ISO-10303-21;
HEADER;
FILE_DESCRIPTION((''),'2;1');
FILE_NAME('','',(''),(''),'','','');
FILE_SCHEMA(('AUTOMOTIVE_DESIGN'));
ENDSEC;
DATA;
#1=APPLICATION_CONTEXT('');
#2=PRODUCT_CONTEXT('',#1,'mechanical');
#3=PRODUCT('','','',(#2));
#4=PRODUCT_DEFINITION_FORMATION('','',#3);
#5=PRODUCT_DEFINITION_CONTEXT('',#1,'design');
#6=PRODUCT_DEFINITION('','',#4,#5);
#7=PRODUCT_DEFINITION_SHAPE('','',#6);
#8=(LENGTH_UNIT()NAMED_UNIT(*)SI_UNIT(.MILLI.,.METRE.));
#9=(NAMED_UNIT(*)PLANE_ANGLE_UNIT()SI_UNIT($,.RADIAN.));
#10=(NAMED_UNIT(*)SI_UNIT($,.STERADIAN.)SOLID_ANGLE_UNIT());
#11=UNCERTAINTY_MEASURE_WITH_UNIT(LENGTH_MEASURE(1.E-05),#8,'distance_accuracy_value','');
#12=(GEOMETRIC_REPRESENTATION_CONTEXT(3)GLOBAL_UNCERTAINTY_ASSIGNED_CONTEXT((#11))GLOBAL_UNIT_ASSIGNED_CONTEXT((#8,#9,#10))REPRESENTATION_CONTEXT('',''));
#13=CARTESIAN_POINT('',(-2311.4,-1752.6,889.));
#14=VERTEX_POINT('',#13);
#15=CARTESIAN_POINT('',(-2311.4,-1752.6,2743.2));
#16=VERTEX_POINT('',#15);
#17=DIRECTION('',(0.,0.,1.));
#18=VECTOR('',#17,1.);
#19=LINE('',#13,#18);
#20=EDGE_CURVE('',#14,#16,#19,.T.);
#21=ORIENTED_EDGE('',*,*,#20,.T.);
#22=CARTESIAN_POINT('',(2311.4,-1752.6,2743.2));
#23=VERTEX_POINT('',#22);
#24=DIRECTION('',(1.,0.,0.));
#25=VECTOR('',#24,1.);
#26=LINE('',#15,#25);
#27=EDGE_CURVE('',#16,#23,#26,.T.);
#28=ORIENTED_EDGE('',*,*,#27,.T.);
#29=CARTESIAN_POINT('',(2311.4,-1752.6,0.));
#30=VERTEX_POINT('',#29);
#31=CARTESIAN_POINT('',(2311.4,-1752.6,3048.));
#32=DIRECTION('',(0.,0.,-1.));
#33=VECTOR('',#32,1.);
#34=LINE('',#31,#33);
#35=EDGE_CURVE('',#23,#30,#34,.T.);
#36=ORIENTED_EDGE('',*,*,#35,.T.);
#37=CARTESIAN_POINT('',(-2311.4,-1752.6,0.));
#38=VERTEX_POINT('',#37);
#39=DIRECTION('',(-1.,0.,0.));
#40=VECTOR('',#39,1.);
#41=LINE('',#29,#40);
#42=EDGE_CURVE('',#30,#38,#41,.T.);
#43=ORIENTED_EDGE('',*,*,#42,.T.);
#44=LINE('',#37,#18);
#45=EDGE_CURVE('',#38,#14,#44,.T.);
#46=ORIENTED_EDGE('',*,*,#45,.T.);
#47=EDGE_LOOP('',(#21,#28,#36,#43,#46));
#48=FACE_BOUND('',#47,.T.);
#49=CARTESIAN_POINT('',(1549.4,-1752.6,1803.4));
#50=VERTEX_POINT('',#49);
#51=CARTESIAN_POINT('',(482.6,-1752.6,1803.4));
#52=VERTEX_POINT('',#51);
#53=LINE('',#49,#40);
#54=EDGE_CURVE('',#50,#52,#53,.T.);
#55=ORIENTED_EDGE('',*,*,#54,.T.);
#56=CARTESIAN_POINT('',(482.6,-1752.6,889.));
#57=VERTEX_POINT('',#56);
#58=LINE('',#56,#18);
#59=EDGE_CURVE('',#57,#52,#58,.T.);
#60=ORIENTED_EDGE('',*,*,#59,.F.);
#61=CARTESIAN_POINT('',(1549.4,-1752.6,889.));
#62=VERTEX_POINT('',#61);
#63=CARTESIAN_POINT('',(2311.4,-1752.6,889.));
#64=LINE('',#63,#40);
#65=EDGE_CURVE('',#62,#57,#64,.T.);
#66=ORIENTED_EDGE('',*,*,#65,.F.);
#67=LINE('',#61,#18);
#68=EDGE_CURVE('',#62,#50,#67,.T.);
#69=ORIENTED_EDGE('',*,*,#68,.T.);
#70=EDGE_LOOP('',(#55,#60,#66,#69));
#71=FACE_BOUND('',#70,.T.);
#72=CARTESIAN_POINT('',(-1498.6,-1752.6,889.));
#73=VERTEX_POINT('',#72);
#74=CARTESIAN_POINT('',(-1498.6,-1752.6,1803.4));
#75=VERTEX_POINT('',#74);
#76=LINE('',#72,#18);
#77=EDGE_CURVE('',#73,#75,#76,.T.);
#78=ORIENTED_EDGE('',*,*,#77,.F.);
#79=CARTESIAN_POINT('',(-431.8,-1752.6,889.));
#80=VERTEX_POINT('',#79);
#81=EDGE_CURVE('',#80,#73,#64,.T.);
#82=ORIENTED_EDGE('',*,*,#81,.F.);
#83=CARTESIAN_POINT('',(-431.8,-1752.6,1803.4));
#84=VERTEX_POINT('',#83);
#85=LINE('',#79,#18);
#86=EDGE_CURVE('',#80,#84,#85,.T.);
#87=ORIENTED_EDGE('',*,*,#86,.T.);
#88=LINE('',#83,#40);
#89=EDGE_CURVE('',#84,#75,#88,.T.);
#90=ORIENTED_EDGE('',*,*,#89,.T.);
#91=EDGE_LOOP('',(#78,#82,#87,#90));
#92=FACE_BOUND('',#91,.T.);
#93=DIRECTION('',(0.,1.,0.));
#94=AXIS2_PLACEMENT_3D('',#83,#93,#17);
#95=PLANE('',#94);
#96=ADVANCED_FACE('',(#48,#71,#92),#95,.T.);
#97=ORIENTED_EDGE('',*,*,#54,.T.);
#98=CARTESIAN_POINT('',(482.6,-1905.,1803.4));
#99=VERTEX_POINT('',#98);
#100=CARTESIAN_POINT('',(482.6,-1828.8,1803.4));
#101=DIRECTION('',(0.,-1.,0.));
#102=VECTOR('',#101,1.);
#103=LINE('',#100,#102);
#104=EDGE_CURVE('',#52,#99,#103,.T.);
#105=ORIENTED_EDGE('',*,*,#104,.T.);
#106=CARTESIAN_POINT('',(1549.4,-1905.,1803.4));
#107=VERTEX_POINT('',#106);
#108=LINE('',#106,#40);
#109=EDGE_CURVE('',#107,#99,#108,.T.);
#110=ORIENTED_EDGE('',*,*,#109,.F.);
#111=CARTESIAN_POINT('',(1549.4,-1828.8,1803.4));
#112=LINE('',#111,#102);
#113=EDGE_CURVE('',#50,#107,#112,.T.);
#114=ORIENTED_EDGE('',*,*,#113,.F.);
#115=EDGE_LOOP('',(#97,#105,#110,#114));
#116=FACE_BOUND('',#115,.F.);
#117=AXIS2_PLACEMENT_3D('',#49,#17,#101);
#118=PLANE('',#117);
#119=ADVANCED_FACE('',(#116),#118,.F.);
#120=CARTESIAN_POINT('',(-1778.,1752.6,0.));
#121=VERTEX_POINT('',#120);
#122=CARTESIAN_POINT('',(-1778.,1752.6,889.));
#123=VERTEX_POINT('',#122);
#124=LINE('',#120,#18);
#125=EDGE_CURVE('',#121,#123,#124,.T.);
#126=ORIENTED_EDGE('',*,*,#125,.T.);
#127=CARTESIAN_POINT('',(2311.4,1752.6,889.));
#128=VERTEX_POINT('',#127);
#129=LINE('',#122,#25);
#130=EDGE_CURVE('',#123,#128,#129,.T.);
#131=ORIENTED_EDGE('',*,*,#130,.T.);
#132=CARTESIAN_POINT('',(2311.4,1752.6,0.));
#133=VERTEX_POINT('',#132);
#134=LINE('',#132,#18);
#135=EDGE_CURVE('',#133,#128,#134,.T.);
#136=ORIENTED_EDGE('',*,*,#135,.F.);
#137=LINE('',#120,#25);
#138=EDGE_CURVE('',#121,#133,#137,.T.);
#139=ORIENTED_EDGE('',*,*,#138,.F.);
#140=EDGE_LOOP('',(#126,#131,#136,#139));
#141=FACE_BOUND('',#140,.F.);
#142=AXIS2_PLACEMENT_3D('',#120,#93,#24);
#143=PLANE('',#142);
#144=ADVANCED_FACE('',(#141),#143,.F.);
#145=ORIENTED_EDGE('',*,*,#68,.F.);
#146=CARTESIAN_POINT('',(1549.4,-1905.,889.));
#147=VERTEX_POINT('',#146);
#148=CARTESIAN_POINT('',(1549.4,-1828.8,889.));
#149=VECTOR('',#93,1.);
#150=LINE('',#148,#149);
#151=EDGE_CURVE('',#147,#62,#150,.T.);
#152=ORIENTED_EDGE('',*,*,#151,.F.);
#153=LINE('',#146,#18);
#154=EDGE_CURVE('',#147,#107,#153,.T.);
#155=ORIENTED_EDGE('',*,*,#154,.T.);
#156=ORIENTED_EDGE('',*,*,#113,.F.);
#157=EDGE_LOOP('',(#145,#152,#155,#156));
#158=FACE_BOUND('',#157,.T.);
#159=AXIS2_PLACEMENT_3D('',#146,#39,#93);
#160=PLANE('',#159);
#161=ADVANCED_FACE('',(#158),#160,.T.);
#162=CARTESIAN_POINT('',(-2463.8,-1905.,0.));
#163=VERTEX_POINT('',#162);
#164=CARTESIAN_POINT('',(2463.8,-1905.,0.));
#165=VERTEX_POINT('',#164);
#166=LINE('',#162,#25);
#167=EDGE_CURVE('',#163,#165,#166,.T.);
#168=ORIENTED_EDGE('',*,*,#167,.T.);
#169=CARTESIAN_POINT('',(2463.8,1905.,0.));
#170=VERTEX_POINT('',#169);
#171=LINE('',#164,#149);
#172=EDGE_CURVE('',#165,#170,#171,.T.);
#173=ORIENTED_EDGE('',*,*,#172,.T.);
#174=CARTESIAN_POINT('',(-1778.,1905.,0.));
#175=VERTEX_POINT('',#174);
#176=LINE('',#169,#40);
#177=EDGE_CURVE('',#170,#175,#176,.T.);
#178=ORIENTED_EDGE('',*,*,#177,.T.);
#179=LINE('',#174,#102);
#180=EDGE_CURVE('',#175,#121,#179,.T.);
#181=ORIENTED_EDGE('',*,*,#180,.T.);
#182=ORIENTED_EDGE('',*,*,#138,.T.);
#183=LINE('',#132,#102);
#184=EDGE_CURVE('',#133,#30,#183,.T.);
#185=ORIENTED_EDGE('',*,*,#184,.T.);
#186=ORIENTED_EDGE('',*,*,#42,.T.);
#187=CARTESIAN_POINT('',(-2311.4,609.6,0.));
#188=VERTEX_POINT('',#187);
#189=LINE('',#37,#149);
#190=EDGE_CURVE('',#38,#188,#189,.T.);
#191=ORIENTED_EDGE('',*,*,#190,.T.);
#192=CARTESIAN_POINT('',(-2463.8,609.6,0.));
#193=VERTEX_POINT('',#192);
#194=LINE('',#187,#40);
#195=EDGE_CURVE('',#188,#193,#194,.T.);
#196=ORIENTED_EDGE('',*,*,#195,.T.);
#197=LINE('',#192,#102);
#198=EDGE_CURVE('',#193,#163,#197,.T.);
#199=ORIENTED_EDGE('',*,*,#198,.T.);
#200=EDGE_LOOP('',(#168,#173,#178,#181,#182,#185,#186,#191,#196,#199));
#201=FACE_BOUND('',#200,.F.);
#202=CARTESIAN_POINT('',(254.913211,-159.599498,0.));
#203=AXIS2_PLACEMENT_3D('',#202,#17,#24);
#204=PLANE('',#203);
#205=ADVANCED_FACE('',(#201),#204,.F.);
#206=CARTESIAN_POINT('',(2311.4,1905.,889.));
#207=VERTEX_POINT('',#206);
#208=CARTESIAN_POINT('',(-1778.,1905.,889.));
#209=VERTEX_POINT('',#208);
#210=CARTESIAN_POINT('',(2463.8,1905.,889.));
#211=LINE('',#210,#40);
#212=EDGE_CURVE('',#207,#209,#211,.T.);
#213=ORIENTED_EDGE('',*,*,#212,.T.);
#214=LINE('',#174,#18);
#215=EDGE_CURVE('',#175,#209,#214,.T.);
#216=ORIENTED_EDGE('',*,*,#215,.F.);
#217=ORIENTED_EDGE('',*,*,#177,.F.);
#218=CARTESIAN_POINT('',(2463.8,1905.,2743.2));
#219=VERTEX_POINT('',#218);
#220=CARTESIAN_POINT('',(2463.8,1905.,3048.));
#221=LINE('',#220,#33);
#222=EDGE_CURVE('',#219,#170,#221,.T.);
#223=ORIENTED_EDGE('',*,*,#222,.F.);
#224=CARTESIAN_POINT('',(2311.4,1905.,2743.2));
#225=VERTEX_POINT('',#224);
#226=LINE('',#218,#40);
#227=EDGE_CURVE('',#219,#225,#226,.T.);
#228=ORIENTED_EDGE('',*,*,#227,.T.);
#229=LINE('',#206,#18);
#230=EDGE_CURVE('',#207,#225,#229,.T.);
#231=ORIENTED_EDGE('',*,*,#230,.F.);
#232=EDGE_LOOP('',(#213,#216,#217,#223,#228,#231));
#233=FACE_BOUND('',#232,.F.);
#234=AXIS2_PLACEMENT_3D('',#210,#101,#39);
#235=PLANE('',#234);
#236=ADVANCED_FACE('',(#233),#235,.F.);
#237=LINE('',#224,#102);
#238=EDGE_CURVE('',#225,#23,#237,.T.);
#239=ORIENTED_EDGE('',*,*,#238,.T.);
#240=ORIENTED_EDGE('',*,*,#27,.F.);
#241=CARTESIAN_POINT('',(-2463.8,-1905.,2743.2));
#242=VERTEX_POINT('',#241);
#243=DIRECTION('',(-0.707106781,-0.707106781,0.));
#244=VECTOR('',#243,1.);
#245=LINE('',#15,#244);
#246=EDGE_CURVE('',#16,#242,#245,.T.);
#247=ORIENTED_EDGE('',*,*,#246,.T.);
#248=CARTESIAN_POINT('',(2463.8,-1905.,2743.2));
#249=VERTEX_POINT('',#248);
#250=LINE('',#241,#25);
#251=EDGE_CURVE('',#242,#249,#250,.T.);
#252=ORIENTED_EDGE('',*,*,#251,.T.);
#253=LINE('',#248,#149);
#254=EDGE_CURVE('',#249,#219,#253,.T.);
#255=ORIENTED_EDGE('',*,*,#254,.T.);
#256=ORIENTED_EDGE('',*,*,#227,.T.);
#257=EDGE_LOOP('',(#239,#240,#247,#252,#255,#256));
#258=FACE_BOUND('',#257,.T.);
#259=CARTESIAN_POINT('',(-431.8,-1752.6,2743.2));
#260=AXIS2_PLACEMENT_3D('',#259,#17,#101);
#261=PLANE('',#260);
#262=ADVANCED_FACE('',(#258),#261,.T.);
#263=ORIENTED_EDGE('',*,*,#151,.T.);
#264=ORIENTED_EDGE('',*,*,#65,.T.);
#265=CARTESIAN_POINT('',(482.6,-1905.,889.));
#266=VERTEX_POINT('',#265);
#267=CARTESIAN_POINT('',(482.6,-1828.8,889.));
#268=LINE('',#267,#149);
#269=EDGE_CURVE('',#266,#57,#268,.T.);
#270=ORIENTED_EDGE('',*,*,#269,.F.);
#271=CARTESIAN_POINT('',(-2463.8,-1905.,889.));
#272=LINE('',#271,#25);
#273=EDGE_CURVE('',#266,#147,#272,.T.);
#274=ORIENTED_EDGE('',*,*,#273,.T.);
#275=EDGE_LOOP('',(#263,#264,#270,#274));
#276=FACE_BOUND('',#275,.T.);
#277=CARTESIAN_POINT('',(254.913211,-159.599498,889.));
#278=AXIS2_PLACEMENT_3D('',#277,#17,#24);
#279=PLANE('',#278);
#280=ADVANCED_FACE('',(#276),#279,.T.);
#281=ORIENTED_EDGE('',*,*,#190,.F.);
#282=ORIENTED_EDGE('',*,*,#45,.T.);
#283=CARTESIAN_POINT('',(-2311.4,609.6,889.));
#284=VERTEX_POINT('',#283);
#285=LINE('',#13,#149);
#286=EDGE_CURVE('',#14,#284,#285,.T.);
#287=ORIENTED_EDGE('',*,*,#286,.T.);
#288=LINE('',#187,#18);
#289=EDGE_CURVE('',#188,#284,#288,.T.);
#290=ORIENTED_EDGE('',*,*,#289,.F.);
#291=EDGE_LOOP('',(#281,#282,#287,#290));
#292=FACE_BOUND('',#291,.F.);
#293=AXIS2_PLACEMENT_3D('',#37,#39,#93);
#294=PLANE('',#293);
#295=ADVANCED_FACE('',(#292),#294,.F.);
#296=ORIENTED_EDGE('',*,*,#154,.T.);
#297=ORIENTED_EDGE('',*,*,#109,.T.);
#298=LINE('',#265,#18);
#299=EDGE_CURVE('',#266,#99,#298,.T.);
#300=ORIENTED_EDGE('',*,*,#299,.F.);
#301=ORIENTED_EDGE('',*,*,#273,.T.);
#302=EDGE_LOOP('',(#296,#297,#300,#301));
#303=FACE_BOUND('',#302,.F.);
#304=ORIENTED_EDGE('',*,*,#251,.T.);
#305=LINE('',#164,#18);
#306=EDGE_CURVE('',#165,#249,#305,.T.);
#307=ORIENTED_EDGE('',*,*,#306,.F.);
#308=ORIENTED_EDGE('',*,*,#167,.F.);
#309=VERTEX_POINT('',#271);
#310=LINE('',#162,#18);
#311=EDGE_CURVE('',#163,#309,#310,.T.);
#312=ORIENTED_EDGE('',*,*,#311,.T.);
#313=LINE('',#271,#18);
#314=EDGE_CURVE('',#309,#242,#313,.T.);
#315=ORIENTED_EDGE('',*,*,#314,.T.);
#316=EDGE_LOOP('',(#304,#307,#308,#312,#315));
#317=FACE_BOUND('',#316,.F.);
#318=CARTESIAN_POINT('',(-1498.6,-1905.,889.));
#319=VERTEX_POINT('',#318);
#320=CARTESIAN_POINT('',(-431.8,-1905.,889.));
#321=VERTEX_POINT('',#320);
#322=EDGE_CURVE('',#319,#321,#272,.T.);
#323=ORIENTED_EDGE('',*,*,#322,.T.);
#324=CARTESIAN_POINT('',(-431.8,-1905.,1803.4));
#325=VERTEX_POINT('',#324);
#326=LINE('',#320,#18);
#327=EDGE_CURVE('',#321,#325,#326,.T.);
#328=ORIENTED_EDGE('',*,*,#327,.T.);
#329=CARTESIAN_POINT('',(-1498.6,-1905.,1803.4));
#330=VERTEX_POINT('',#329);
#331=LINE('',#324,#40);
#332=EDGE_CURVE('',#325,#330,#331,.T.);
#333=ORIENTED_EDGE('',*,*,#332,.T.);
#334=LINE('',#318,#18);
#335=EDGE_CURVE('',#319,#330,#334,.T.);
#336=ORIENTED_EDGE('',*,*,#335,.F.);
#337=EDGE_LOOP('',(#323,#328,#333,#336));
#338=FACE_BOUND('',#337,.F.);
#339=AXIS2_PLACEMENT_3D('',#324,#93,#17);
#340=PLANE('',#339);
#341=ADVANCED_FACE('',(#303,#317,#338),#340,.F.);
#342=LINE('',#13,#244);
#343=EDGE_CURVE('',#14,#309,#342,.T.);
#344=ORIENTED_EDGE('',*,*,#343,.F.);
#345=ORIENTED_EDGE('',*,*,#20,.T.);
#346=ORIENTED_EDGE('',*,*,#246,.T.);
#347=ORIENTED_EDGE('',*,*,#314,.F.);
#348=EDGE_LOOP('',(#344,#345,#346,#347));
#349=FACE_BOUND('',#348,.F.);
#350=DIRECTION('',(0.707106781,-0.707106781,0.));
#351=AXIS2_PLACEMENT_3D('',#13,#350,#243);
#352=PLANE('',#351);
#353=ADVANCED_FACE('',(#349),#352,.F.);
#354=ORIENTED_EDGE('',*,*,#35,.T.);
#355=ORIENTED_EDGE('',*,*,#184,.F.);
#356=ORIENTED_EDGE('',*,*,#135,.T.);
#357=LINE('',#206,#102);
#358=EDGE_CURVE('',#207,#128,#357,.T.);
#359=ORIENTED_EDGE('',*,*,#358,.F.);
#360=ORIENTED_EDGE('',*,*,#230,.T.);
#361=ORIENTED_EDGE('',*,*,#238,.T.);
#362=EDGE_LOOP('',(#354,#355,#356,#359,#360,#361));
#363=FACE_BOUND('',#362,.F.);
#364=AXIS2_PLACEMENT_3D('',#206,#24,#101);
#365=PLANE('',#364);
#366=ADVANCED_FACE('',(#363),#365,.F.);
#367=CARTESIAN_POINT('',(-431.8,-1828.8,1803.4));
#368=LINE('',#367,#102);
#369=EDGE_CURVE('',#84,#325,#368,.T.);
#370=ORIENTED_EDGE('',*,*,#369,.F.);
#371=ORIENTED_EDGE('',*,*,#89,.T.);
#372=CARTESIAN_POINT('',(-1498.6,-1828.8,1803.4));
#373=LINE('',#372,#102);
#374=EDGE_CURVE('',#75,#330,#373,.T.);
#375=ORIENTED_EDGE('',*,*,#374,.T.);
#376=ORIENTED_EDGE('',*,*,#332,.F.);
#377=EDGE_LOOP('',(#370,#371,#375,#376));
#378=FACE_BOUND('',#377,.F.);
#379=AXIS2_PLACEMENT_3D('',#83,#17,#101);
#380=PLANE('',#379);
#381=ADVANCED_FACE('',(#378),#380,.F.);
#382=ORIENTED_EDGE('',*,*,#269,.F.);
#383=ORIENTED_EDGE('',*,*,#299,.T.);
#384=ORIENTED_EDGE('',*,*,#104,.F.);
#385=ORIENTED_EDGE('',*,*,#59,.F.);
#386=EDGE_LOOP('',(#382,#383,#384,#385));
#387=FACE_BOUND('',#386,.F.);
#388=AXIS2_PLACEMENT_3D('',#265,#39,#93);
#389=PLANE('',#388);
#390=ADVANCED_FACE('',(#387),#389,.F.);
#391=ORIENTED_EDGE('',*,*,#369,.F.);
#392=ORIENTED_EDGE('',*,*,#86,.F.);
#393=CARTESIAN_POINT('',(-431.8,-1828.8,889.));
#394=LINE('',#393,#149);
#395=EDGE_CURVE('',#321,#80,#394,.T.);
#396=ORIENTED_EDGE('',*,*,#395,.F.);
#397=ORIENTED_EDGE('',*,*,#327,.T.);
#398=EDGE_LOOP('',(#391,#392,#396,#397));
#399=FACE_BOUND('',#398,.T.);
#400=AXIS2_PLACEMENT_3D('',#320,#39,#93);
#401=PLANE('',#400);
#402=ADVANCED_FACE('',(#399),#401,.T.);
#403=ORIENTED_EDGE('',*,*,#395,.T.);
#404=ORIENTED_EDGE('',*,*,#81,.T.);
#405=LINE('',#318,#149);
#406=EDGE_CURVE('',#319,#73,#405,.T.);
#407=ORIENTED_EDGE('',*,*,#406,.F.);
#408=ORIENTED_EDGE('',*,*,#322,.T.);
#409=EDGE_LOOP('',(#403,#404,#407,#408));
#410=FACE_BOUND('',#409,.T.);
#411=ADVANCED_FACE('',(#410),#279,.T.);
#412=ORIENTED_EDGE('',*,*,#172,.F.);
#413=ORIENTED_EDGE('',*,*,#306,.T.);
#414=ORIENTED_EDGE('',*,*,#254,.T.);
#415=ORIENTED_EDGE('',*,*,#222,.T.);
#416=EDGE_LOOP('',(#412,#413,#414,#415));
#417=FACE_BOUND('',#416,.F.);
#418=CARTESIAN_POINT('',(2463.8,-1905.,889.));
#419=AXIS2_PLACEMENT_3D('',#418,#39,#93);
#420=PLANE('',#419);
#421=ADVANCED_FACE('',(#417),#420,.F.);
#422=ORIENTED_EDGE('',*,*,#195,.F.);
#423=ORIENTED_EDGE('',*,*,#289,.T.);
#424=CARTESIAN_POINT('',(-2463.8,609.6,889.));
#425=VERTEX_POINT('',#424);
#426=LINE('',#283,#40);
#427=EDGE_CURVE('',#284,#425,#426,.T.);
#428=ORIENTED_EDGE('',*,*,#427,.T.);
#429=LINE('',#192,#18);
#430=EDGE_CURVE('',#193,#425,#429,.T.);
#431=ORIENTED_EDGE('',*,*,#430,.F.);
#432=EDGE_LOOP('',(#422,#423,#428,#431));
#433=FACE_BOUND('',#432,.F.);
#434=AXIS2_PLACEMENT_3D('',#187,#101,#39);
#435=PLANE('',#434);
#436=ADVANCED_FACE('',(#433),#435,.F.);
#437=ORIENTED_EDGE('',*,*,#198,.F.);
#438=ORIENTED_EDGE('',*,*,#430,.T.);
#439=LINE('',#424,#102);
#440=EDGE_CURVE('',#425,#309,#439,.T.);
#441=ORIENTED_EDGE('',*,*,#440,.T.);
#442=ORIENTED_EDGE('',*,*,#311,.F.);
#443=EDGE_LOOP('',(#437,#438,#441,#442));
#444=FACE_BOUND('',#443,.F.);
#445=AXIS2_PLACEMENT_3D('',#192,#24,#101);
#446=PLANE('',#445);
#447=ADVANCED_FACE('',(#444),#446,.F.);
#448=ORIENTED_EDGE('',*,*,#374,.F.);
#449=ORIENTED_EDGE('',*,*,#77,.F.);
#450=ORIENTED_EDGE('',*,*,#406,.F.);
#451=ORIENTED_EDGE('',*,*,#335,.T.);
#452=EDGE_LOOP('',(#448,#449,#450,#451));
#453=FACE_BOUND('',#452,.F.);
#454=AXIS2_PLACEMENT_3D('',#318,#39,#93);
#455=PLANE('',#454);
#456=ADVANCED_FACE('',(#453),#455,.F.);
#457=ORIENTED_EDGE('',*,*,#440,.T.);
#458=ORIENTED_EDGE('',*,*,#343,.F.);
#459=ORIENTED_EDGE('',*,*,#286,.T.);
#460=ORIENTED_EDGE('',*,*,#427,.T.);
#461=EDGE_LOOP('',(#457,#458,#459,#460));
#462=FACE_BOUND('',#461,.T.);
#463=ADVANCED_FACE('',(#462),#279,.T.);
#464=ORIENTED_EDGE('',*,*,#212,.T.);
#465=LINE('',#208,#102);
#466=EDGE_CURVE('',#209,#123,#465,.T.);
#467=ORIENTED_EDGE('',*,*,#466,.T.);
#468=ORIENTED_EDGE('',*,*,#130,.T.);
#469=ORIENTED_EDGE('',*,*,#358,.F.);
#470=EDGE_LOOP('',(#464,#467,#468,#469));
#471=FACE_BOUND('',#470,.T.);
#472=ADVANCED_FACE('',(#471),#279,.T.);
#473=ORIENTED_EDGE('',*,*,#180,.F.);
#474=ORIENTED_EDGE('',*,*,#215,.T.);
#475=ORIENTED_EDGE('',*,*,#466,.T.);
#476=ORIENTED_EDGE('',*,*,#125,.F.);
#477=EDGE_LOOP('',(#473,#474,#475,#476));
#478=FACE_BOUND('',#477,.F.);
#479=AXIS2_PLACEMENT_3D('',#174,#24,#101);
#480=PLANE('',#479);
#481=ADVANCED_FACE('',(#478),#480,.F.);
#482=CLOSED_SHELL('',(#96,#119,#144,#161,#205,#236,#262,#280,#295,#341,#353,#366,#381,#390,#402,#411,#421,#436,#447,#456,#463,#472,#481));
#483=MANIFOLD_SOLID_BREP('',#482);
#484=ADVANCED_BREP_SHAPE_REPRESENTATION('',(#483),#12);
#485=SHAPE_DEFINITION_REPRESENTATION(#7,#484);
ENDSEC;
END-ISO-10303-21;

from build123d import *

# Parameters (mm, degrees)
F1_DEPTH  = 889
F3_DEPTH  = 2159
F4_W      = 762
F4_H      = 152.4
F4_W_2    = 914.4
F5_DEPTH  = 2159
F6_W      = 152.4
F6_H      = 1244.6
F7_DEPTH  = 1066.8
F8_W      = 152.4
F8_H      = 1244.6
F9_DEPTH  = 1066.8
F10_DEPTH = 304.8


with BuildPart() as f1:
    # F0 (on Top) → F1 (new body)
    with BuildSketch(Plane.XY):
        Polygon((-1778, 1752.6), (2311.4, 1752.6), (2311.4, -1752.6), (-2311.4, -1752.6), (-2311.4, 609.6), (-2463.8, 609.6), (-2463.8, -1752.6), (-2463.8, -1905), (-2311.4, -1905), (2311.4, -1905), (2463.8, -1905), (2463.8, 1752.6), (2463.8, 1905), (2311.4, 1905), (-1778, 1905), align=None)
    extrude(amount=F1_DEPTH)

    # F2 (on face) → F3 (join)
    with BuildSketch(Plane.XY.offset(889)):
        Polygon((2311.4, 1905), (2311.4, 1752.6), (2311.4, -1752.6), (2311.4, -1905), (2463.8, -1905), (2463.8, 1905), align=None)
    extrude(amount=F3_DEPTH)

    # F4 (on face) → F5 (join)
    with BuildSketch(Plane.XY.offset(889)):
        with Locations((1930.4, -1828.8)):
            Rectangle(F4_W, F4_H)
        with Locations((25.4, -1828.8)):
            Rectangle(F4_W_2, F4_H)
        Polygon((-2463.8, -1905), (-1498.6, -1905), (-1498.6, -1752.6), (-2311.4, -1752.6), align=None)
    extrude(amount=F5_DEPTH)

    # F6 (on face) → F7 (join, through all)
    with BuildSketch(Plane(origin=(1549.4, 0, 0), x_dir=(0, -1, 0), z_dir=(-1, 0, 0))):
        with Locations((1828.8, 2425.7)):
            Rectangle(F6_W, F6_H)
    extrude(amount=F7_DEPTH)

    # F8 (on face) → F9 (join, through all)
    with BuildSketch(Plane(origin=(-431.8, 0, 0), x_dir=(0, -1, 0), z_dir=(-1, 0, 0))):
        with Locations((1828.8, 2425.7)):
            Rectangle(F8_W, F8_H)
    extrude(amount=F9_DEPTH)

    # F10 (cut): a face of the model
    f10_faces = [f1.faces().sort_by_distance(p)[0] for p in [
        (2373.6875121995, 76.2, 3048),
    ]]
    extrude(f10_faces, amount=-F10_DEPTH, mode=Mode.SUBTRACT)


solid = f1.part
